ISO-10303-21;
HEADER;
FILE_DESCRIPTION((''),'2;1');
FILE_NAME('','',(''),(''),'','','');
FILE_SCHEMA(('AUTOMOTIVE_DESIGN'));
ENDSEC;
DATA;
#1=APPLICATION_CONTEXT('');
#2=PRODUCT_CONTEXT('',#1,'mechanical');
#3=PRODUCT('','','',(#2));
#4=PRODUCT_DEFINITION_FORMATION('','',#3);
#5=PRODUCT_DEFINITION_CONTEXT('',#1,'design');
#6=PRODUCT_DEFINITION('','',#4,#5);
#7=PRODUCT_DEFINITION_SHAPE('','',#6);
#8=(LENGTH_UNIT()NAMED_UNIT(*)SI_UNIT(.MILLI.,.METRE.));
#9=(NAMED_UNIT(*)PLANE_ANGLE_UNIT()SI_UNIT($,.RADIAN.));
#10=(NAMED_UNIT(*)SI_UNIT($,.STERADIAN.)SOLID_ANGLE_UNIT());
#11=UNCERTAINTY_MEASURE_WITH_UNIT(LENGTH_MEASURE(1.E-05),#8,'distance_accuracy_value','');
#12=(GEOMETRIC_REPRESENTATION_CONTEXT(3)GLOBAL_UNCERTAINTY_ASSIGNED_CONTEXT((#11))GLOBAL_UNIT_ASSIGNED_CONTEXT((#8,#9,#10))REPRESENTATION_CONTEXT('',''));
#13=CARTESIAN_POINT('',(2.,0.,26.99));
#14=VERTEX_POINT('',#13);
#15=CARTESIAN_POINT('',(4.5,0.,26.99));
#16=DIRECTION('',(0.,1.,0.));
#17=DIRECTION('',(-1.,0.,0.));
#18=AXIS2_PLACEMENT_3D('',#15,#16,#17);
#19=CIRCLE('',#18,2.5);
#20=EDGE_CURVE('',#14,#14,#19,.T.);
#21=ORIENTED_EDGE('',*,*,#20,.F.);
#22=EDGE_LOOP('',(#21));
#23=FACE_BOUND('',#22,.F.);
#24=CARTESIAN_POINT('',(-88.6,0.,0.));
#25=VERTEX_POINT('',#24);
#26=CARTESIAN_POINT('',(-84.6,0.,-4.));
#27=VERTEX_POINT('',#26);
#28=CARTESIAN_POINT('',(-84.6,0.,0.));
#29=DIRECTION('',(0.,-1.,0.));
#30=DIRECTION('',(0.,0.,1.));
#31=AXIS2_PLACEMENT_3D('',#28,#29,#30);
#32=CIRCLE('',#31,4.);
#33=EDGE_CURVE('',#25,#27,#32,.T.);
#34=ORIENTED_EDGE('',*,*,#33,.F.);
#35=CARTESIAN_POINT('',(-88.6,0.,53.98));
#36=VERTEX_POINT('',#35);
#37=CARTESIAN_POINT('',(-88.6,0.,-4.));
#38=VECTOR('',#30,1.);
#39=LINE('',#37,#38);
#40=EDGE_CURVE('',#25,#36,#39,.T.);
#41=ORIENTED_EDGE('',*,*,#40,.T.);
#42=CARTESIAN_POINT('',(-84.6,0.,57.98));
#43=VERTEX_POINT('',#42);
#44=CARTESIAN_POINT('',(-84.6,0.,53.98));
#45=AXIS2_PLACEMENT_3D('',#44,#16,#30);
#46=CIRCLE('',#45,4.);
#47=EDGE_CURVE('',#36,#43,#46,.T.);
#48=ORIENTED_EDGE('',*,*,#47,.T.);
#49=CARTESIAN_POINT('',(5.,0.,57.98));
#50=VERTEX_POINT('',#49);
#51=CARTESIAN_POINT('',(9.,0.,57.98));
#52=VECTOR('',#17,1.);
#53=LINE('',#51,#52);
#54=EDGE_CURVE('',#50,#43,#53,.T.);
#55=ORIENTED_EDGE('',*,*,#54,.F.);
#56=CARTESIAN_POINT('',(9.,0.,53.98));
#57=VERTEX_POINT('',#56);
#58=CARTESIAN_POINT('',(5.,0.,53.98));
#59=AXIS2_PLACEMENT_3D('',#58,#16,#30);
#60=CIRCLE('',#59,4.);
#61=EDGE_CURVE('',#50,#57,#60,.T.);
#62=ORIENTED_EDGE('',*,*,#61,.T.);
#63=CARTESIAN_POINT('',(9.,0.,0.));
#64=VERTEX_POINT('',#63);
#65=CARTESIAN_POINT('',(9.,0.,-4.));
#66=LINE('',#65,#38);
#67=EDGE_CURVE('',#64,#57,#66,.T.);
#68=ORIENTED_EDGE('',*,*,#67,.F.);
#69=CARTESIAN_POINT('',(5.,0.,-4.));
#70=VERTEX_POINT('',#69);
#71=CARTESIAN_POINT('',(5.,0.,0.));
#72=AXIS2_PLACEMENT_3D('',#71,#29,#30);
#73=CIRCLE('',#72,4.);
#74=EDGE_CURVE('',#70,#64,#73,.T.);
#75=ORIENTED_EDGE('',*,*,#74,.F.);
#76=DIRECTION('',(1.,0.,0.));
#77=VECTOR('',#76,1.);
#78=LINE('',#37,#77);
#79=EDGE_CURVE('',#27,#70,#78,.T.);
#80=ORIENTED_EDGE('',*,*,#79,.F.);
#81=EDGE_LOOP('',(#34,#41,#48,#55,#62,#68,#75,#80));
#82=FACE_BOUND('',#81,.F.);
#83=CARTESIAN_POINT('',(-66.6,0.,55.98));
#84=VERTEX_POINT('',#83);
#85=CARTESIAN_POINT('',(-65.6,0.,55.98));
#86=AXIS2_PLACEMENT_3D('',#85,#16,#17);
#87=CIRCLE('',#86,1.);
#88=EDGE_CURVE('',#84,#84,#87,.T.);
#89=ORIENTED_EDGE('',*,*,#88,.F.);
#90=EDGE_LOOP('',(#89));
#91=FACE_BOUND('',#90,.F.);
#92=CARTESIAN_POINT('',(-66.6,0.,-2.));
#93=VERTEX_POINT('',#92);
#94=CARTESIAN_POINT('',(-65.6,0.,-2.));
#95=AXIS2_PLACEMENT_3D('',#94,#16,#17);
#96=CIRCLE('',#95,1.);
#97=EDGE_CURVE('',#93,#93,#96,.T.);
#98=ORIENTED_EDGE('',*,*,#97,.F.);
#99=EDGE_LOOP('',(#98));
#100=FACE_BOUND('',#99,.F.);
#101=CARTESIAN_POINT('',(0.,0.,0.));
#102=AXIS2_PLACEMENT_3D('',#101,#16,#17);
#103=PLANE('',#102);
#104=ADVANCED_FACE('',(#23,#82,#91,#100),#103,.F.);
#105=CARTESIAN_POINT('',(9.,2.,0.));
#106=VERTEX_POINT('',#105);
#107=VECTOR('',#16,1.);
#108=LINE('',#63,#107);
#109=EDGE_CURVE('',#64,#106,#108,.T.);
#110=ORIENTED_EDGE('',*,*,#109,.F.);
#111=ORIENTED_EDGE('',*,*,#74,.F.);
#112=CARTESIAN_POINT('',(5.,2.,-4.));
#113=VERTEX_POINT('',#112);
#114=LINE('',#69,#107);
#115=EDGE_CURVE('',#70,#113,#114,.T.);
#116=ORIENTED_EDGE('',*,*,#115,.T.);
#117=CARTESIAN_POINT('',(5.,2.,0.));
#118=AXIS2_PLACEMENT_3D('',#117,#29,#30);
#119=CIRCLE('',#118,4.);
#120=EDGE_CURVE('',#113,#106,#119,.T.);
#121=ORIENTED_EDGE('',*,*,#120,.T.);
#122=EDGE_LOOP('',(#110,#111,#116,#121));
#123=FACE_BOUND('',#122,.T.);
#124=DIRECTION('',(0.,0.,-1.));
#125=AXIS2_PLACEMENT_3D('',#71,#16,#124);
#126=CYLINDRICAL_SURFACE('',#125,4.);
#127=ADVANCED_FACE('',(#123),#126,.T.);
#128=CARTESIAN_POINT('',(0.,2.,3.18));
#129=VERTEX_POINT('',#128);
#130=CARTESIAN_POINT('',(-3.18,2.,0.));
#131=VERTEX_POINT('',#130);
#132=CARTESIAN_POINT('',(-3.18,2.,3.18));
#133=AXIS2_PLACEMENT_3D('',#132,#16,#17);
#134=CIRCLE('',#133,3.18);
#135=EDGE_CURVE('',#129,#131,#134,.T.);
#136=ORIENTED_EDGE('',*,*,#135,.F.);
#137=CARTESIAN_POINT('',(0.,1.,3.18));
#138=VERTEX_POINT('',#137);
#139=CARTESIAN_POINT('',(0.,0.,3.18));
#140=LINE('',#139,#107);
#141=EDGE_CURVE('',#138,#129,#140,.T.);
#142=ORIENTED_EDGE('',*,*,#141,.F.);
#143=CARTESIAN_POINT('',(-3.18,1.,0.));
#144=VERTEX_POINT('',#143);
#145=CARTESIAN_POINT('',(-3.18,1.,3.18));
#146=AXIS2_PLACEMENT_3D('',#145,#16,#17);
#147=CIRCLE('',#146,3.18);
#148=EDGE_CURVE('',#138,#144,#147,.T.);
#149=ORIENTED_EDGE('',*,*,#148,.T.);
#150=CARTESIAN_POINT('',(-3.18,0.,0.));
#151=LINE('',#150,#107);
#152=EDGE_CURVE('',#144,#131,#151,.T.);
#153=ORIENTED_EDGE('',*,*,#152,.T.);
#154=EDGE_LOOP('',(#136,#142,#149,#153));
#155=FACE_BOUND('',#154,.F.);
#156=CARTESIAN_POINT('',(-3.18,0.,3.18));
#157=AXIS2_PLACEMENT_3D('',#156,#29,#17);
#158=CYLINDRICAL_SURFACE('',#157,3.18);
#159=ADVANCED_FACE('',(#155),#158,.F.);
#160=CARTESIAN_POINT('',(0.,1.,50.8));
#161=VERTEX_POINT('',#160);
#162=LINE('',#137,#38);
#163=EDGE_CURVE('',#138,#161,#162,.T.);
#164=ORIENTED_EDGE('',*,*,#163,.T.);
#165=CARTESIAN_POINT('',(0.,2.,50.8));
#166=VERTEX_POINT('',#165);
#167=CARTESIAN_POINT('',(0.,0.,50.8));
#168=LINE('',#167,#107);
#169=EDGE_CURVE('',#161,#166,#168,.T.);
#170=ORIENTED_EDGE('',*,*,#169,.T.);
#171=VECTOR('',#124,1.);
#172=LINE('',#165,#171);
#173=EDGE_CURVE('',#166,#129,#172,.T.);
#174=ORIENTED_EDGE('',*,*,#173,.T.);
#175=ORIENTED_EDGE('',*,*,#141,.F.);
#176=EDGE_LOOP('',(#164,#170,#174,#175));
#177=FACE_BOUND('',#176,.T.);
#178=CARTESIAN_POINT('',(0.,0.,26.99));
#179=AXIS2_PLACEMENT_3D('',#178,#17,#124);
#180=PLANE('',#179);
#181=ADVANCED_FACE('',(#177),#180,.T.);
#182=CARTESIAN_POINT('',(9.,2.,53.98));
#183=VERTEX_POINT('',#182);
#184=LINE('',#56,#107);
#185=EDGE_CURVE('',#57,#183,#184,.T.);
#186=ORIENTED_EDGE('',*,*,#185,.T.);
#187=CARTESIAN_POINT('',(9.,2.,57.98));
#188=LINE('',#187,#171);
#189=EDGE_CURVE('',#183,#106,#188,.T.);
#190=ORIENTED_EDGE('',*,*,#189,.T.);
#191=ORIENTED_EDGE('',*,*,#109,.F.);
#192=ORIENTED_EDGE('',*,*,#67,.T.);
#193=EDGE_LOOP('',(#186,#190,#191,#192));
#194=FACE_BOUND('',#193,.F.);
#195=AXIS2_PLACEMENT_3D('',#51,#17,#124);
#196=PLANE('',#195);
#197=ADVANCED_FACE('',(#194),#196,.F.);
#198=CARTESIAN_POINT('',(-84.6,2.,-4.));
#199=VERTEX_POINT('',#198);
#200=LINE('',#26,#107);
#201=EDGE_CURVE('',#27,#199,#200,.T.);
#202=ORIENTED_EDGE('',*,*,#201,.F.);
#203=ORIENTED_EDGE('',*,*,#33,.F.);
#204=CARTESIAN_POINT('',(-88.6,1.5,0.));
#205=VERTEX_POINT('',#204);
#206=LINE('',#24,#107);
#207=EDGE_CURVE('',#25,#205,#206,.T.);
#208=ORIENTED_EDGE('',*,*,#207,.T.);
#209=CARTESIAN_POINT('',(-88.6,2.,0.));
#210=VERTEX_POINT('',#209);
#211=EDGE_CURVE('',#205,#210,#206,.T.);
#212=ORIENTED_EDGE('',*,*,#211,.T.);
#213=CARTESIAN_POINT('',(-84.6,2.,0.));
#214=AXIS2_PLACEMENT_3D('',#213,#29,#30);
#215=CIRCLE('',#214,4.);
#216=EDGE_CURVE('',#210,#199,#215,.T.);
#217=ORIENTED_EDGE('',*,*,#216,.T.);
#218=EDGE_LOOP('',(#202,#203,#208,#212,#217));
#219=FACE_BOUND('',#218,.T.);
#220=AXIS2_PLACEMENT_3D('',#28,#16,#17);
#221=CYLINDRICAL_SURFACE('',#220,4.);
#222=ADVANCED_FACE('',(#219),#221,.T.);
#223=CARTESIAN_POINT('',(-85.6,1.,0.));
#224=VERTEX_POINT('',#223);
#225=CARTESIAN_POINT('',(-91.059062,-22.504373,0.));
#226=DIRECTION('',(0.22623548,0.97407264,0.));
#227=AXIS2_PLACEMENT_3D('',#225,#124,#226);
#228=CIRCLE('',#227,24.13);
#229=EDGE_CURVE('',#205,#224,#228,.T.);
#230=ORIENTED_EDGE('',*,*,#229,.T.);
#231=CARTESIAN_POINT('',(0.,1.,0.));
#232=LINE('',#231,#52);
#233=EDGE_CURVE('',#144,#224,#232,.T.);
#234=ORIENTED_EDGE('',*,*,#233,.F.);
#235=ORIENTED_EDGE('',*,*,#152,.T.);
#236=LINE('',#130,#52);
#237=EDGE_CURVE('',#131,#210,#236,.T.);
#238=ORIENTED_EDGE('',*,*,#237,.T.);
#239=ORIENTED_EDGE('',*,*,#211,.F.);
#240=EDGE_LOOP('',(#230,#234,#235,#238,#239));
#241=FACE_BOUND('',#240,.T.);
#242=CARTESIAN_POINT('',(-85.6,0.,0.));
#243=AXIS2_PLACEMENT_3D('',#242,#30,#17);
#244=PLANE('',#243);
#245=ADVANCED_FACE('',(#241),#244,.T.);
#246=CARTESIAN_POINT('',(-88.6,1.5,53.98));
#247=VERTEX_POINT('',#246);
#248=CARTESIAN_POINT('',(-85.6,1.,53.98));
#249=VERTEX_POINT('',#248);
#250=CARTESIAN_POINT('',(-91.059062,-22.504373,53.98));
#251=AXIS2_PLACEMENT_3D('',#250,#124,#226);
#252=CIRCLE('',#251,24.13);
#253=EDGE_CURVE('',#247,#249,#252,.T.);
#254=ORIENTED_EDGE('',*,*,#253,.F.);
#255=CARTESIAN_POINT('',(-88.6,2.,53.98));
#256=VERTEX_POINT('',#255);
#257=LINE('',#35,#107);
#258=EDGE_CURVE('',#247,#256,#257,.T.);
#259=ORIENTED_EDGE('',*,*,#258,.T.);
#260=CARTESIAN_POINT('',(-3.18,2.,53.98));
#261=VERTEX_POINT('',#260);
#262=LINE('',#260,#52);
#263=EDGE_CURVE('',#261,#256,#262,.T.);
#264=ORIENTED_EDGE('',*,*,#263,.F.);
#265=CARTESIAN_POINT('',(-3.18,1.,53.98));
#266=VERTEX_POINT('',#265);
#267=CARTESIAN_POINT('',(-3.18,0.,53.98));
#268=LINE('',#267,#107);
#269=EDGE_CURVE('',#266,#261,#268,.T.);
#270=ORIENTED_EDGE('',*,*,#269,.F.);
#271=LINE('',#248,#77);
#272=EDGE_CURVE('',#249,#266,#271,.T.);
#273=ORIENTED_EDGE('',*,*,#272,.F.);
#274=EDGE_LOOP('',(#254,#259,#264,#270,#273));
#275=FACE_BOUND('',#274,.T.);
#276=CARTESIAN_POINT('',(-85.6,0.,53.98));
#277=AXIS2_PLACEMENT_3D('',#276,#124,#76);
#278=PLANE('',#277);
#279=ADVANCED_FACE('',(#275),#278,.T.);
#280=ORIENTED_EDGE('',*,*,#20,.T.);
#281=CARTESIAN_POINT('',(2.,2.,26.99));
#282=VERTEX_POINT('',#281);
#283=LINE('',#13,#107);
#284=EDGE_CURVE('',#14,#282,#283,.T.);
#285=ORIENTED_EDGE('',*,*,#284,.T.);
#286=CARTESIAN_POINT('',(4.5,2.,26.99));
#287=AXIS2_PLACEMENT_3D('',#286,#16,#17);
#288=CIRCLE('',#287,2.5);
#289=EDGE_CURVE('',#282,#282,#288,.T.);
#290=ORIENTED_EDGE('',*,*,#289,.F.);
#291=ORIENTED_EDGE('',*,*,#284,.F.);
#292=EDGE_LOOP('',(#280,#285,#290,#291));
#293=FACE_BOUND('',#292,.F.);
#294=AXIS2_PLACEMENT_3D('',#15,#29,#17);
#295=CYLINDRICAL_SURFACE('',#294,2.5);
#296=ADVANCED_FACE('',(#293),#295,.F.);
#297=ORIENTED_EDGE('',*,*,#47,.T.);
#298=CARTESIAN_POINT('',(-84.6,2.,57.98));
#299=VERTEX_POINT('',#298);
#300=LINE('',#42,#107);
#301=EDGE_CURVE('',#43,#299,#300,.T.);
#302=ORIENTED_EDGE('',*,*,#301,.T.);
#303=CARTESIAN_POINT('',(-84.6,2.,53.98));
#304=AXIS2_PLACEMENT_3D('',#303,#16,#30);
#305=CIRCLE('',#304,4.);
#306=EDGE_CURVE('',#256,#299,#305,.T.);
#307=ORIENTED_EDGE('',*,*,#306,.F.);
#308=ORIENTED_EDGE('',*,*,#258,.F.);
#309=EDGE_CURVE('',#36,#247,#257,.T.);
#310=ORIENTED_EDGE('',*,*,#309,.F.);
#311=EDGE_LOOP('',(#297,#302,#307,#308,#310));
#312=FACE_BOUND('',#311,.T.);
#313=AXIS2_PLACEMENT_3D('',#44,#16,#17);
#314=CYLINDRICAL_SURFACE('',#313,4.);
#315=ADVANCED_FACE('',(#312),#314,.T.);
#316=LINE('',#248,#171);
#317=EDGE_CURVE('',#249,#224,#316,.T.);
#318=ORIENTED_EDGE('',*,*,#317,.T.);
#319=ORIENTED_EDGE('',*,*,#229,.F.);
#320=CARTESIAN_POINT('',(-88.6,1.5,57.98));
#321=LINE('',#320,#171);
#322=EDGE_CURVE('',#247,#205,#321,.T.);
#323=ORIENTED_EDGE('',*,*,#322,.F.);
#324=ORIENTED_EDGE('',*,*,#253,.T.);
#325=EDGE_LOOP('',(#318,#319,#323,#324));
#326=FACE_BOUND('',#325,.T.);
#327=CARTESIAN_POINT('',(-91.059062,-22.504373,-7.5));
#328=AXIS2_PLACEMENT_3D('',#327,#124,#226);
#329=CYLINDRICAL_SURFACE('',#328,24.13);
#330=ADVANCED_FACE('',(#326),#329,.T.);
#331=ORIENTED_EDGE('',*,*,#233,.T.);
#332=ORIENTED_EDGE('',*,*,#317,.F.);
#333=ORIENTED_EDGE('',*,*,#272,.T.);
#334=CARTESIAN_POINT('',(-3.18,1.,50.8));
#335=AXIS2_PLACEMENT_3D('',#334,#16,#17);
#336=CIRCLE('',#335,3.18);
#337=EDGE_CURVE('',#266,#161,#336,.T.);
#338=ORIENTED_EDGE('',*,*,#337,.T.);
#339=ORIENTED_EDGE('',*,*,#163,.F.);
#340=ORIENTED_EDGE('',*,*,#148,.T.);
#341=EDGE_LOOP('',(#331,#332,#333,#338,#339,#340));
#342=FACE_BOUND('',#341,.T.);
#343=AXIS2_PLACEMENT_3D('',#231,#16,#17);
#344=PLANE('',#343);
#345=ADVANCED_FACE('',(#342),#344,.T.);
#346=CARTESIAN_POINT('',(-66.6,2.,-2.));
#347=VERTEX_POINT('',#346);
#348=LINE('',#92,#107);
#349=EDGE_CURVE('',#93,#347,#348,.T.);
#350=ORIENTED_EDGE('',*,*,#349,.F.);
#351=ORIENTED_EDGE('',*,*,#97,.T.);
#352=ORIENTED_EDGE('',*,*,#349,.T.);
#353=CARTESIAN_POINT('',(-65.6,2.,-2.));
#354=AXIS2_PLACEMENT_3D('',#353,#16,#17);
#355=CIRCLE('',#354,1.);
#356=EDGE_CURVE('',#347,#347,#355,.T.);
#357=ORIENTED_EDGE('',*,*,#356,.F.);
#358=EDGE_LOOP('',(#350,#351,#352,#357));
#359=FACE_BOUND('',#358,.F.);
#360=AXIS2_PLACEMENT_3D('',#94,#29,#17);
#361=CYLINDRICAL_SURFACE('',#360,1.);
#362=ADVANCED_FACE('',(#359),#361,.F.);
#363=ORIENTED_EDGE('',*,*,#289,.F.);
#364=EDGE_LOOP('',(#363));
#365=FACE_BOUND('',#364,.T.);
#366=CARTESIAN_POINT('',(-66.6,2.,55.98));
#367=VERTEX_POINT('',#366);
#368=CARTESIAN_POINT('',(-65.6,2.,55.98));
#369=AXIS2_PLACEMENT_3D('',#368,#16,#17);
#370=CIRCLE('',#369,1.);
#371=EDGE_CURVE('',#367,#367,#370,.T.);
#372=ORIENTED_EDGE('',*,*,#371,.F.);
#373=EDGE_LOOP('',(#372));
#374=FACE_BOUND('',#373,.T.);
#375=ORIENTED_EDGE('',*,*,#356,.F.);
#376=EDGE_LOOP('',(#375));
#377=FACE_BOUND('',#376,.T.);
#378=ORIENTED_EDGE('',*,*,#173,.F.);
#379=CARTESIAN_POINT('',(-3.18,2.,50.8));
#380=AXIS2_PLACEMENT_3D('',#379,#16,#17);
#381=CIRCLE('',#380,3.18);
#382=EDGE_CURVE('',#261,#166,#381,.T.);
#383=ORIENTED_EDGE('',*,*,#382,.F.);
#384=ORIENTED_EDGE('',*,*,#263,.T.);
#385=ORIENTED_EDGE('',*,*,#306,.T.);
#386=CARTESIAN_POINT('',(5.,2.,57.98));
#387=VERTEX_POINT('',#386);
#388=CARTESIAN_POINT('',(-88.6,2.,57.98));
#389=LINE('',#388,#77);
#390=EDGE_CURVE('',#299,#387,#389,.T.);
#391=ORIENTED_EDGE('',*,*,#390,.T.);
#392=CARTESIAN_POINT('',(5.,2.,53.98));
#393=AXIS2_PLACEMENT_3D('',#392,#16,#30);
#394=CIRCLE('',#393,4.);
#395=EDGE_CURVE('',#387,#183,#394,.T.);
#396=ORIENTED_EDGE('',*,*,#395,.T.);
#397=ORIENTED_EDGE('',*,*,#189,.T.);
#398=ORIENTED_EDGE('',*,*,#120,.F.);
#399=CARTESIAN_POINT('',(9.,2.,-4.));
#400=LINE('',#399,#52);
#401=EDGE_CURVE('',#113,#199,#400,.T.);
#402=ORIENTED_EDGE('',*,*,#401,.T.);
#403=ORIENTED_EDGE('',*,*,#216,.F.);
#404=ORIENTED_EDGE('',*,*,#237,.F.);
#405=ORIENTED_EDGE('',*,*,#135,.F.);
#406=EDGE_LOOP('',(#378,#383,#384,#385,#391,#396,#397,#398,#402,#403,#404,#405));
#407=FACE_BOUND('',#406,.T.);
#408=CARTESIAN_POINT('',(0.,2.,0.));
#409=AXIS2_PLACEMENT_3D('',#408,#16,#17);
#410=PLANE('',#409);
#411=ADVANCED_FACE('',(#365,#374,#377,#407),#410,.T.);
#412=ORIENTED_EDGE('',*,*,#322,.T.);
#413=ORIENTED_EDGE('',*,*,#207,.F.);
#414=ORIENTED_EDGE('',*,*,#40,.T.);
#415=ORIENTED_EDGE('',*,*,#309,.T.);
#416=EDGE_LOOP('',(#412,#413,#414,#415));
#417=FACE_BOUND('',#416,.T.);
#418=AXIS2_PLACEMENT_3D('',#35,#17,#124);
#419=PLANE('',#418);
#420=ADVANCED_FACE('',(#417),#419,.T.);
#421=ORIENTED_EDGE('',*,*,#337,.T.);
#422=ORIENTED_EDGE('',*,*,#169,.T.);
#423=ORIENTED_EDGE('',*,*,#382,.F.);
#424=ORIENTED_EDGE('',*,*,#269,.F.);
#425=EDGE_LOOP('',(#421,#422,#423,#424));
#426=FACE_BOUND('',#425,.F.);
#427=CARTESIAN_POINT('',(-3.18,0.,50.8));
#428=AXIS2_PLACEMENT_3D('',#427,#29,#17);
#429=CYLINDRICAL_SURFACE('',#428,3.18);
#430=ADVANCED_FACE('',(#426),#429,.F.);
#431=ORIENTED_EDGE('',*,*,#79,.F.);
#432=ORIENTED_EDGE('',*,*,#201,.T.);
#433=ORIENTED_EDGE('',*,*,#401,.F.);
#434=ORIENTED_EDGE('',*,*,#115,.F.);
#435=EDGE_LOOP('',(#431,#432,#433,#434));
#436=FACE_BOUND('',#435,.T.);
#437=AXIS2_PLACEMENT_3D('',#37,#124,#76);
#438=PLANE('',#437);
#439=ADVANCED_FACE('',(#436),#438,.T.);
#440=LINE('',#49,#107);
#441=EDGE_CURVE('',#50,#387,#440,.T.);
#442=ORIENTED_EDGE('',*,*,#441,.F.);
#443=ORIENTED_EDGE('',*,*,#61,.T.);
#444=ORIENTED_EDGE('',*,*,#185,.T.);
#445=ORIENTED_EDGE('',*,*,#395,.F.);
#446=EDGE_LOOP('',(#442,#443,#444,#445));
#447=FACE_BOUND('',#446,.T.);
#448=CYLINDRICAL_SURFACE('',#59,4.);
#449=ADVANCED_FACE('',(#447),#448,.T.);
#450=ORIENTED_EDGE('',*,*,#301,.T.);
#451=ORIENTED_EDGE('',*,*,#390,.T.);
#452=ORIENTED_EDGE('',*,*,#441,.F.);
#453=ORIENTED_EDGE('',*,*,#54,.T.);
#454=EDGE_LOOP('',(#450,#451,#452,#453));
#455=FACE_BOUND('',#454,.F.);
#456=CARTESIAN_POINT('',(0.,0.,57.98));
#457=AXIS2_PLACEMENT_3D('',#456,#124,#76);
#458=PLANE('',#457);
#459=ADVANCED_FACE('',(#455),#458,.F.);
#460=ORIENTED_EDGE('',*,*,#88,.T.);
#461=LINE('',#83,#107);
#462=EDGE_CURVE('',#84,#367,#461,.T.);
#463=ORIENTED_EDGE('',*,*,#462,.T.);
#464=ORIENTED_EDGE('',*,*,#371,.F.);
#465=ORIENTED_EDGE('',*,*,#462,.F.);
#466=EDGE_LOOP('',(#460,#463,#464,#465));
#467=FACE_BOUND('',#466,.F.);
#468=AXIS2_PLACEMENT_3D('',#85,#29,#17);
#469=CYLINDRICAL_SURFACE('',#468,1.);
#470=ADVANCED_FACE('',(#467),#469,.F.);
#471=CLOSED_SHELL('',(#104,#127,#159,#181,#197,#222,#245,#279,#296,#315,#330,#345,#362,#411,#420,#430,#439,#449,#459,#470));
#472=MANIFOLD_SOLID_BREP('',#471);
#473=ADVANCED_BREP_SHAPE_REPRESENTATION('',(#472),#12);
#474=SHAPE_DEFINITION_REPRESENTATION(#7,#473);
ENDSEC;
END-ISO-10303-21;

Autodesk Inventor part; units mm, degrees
ref_plane "YZ Plane" through (0, 0, 0) normal (1, 0, 0) x (0, 1, 0)
ref_plane "XZ Plane" through (0, 0, 0) normal (0, 1, 0) x (-1, 0, 0)
ref_plane "XY Plane" through (0, 0, 0) normal (0, 0, 1) x (1, 0, 0)
sketch "Sketch1" plane through (0, 0, 0) normal (0, 1, 0) x (-1, 0, 0)
  line L0 (0, 0) -> (85.6, 0)
  line L1 (85.6, 0) -> (85.6, 53.98)
  line L2 (85.6, 53.98) -> (0, 53.98)
  line L3 (0, 53.98) -> (0, 0)
  line L4 (0, 53.98) -> (0, 50.8)
  line L5 (0, 50.8) -> (3.18, 50.8)
  circle A0 centre (3.18, 50.8) radius 3.18
  line L6 (85.6, 53.98) -> (85.6, 57.98)
  line L7 (85.6, 57.98) -> (0, 57.98)
  line L8 (0, 57.98) -> (-9, 57.98)
  line L9 (-9, 57.98) -> (-9, 0)
  line L10 (-9, 0) -> (0, 0)
  line L11 (0, 26.99) -> (-4.5, 26.99)
  circle A1 centre (-4.5, 26.99) radius 2.5
  line L12 (85.6, 55.98) -> (65.6, 55.98)
  circle A2 centre (65.6, 55.98) radius 1
  line L13 (0, 26.99) -> (85.6, 26.99)
  line L14 (85.6, -4) -> (0, -4)
  line L15 (0, -4) -> (-9, -4)
  circle A3 centre (65.6, -2) radius 1
  line L16 (85.6, -4) -> (85.6, 0)
  line L17 (-9, -4) -> (-9, 0)
  line L18 (85.6, 57.98) -> (88.6, 57.98)
  line L19 (88.6, 57.98) -> (88.6, -4)
  line L20 (88.6, -4) -> (85.6, -4)
  line L21 (85.6, -4) -> (85.6, 57.98)
  line L22 (85.6, 53.98) -> (88.6, 53.98)
  line L23 (85.6, 0) -> (88.6, 0)
  circle A4 centre (3.18, 3.18) radius 3.18
  point P0 (3.18, 0)
  point P1 (0, 3.18)
  point P2 (3.18, 53.98)
  dimension "d0" = 85.6
  dimension "d1" = 53.98
  dimension "d2" = 3.18
  dimension "d3" = 3.18
  dimension "d4" = 4
  dimension "d5" = 9
  dimension "d6" = 5
  dimension "d7" = 20
  dimension "d8" = 2
  dimension "d9" = 3
extrude "Extrusion1" add sketch "Sketch1" along normal blind 2 contours L3 A4 L0 | L10 L9 L8 L7 L6 L2 L3 | L0 L16 L14 L15 L17 L10 | L3 L2 A0 | L6 L18 L19 L22
extrude "Extrusion2" add sketch "Sketch1" along normal blind 1 contours A4 L3 L13 L1 L0 | A4 | L3 A0 L2 L1 L13 | A0
extrude "Extrusion3" add sketch "Sketch1" along normal blind 2 contours L23 L19 L20 L16
extrude "Extrusion4" add sketch "Sketch1" along normal blind 1.5 contours L1 L22 L19 L23
fillet "Fillet1" radius 24.13 1 edges at (-85.6, 1.5, 26.99)
fillet "Fillet2" radius 4 4 edges at (-88.6, 1, 57.98) (-88.6, 1, -4) (9, 1, -4) (9, 1, 57.98)
properties part number "magnet card bottom"
